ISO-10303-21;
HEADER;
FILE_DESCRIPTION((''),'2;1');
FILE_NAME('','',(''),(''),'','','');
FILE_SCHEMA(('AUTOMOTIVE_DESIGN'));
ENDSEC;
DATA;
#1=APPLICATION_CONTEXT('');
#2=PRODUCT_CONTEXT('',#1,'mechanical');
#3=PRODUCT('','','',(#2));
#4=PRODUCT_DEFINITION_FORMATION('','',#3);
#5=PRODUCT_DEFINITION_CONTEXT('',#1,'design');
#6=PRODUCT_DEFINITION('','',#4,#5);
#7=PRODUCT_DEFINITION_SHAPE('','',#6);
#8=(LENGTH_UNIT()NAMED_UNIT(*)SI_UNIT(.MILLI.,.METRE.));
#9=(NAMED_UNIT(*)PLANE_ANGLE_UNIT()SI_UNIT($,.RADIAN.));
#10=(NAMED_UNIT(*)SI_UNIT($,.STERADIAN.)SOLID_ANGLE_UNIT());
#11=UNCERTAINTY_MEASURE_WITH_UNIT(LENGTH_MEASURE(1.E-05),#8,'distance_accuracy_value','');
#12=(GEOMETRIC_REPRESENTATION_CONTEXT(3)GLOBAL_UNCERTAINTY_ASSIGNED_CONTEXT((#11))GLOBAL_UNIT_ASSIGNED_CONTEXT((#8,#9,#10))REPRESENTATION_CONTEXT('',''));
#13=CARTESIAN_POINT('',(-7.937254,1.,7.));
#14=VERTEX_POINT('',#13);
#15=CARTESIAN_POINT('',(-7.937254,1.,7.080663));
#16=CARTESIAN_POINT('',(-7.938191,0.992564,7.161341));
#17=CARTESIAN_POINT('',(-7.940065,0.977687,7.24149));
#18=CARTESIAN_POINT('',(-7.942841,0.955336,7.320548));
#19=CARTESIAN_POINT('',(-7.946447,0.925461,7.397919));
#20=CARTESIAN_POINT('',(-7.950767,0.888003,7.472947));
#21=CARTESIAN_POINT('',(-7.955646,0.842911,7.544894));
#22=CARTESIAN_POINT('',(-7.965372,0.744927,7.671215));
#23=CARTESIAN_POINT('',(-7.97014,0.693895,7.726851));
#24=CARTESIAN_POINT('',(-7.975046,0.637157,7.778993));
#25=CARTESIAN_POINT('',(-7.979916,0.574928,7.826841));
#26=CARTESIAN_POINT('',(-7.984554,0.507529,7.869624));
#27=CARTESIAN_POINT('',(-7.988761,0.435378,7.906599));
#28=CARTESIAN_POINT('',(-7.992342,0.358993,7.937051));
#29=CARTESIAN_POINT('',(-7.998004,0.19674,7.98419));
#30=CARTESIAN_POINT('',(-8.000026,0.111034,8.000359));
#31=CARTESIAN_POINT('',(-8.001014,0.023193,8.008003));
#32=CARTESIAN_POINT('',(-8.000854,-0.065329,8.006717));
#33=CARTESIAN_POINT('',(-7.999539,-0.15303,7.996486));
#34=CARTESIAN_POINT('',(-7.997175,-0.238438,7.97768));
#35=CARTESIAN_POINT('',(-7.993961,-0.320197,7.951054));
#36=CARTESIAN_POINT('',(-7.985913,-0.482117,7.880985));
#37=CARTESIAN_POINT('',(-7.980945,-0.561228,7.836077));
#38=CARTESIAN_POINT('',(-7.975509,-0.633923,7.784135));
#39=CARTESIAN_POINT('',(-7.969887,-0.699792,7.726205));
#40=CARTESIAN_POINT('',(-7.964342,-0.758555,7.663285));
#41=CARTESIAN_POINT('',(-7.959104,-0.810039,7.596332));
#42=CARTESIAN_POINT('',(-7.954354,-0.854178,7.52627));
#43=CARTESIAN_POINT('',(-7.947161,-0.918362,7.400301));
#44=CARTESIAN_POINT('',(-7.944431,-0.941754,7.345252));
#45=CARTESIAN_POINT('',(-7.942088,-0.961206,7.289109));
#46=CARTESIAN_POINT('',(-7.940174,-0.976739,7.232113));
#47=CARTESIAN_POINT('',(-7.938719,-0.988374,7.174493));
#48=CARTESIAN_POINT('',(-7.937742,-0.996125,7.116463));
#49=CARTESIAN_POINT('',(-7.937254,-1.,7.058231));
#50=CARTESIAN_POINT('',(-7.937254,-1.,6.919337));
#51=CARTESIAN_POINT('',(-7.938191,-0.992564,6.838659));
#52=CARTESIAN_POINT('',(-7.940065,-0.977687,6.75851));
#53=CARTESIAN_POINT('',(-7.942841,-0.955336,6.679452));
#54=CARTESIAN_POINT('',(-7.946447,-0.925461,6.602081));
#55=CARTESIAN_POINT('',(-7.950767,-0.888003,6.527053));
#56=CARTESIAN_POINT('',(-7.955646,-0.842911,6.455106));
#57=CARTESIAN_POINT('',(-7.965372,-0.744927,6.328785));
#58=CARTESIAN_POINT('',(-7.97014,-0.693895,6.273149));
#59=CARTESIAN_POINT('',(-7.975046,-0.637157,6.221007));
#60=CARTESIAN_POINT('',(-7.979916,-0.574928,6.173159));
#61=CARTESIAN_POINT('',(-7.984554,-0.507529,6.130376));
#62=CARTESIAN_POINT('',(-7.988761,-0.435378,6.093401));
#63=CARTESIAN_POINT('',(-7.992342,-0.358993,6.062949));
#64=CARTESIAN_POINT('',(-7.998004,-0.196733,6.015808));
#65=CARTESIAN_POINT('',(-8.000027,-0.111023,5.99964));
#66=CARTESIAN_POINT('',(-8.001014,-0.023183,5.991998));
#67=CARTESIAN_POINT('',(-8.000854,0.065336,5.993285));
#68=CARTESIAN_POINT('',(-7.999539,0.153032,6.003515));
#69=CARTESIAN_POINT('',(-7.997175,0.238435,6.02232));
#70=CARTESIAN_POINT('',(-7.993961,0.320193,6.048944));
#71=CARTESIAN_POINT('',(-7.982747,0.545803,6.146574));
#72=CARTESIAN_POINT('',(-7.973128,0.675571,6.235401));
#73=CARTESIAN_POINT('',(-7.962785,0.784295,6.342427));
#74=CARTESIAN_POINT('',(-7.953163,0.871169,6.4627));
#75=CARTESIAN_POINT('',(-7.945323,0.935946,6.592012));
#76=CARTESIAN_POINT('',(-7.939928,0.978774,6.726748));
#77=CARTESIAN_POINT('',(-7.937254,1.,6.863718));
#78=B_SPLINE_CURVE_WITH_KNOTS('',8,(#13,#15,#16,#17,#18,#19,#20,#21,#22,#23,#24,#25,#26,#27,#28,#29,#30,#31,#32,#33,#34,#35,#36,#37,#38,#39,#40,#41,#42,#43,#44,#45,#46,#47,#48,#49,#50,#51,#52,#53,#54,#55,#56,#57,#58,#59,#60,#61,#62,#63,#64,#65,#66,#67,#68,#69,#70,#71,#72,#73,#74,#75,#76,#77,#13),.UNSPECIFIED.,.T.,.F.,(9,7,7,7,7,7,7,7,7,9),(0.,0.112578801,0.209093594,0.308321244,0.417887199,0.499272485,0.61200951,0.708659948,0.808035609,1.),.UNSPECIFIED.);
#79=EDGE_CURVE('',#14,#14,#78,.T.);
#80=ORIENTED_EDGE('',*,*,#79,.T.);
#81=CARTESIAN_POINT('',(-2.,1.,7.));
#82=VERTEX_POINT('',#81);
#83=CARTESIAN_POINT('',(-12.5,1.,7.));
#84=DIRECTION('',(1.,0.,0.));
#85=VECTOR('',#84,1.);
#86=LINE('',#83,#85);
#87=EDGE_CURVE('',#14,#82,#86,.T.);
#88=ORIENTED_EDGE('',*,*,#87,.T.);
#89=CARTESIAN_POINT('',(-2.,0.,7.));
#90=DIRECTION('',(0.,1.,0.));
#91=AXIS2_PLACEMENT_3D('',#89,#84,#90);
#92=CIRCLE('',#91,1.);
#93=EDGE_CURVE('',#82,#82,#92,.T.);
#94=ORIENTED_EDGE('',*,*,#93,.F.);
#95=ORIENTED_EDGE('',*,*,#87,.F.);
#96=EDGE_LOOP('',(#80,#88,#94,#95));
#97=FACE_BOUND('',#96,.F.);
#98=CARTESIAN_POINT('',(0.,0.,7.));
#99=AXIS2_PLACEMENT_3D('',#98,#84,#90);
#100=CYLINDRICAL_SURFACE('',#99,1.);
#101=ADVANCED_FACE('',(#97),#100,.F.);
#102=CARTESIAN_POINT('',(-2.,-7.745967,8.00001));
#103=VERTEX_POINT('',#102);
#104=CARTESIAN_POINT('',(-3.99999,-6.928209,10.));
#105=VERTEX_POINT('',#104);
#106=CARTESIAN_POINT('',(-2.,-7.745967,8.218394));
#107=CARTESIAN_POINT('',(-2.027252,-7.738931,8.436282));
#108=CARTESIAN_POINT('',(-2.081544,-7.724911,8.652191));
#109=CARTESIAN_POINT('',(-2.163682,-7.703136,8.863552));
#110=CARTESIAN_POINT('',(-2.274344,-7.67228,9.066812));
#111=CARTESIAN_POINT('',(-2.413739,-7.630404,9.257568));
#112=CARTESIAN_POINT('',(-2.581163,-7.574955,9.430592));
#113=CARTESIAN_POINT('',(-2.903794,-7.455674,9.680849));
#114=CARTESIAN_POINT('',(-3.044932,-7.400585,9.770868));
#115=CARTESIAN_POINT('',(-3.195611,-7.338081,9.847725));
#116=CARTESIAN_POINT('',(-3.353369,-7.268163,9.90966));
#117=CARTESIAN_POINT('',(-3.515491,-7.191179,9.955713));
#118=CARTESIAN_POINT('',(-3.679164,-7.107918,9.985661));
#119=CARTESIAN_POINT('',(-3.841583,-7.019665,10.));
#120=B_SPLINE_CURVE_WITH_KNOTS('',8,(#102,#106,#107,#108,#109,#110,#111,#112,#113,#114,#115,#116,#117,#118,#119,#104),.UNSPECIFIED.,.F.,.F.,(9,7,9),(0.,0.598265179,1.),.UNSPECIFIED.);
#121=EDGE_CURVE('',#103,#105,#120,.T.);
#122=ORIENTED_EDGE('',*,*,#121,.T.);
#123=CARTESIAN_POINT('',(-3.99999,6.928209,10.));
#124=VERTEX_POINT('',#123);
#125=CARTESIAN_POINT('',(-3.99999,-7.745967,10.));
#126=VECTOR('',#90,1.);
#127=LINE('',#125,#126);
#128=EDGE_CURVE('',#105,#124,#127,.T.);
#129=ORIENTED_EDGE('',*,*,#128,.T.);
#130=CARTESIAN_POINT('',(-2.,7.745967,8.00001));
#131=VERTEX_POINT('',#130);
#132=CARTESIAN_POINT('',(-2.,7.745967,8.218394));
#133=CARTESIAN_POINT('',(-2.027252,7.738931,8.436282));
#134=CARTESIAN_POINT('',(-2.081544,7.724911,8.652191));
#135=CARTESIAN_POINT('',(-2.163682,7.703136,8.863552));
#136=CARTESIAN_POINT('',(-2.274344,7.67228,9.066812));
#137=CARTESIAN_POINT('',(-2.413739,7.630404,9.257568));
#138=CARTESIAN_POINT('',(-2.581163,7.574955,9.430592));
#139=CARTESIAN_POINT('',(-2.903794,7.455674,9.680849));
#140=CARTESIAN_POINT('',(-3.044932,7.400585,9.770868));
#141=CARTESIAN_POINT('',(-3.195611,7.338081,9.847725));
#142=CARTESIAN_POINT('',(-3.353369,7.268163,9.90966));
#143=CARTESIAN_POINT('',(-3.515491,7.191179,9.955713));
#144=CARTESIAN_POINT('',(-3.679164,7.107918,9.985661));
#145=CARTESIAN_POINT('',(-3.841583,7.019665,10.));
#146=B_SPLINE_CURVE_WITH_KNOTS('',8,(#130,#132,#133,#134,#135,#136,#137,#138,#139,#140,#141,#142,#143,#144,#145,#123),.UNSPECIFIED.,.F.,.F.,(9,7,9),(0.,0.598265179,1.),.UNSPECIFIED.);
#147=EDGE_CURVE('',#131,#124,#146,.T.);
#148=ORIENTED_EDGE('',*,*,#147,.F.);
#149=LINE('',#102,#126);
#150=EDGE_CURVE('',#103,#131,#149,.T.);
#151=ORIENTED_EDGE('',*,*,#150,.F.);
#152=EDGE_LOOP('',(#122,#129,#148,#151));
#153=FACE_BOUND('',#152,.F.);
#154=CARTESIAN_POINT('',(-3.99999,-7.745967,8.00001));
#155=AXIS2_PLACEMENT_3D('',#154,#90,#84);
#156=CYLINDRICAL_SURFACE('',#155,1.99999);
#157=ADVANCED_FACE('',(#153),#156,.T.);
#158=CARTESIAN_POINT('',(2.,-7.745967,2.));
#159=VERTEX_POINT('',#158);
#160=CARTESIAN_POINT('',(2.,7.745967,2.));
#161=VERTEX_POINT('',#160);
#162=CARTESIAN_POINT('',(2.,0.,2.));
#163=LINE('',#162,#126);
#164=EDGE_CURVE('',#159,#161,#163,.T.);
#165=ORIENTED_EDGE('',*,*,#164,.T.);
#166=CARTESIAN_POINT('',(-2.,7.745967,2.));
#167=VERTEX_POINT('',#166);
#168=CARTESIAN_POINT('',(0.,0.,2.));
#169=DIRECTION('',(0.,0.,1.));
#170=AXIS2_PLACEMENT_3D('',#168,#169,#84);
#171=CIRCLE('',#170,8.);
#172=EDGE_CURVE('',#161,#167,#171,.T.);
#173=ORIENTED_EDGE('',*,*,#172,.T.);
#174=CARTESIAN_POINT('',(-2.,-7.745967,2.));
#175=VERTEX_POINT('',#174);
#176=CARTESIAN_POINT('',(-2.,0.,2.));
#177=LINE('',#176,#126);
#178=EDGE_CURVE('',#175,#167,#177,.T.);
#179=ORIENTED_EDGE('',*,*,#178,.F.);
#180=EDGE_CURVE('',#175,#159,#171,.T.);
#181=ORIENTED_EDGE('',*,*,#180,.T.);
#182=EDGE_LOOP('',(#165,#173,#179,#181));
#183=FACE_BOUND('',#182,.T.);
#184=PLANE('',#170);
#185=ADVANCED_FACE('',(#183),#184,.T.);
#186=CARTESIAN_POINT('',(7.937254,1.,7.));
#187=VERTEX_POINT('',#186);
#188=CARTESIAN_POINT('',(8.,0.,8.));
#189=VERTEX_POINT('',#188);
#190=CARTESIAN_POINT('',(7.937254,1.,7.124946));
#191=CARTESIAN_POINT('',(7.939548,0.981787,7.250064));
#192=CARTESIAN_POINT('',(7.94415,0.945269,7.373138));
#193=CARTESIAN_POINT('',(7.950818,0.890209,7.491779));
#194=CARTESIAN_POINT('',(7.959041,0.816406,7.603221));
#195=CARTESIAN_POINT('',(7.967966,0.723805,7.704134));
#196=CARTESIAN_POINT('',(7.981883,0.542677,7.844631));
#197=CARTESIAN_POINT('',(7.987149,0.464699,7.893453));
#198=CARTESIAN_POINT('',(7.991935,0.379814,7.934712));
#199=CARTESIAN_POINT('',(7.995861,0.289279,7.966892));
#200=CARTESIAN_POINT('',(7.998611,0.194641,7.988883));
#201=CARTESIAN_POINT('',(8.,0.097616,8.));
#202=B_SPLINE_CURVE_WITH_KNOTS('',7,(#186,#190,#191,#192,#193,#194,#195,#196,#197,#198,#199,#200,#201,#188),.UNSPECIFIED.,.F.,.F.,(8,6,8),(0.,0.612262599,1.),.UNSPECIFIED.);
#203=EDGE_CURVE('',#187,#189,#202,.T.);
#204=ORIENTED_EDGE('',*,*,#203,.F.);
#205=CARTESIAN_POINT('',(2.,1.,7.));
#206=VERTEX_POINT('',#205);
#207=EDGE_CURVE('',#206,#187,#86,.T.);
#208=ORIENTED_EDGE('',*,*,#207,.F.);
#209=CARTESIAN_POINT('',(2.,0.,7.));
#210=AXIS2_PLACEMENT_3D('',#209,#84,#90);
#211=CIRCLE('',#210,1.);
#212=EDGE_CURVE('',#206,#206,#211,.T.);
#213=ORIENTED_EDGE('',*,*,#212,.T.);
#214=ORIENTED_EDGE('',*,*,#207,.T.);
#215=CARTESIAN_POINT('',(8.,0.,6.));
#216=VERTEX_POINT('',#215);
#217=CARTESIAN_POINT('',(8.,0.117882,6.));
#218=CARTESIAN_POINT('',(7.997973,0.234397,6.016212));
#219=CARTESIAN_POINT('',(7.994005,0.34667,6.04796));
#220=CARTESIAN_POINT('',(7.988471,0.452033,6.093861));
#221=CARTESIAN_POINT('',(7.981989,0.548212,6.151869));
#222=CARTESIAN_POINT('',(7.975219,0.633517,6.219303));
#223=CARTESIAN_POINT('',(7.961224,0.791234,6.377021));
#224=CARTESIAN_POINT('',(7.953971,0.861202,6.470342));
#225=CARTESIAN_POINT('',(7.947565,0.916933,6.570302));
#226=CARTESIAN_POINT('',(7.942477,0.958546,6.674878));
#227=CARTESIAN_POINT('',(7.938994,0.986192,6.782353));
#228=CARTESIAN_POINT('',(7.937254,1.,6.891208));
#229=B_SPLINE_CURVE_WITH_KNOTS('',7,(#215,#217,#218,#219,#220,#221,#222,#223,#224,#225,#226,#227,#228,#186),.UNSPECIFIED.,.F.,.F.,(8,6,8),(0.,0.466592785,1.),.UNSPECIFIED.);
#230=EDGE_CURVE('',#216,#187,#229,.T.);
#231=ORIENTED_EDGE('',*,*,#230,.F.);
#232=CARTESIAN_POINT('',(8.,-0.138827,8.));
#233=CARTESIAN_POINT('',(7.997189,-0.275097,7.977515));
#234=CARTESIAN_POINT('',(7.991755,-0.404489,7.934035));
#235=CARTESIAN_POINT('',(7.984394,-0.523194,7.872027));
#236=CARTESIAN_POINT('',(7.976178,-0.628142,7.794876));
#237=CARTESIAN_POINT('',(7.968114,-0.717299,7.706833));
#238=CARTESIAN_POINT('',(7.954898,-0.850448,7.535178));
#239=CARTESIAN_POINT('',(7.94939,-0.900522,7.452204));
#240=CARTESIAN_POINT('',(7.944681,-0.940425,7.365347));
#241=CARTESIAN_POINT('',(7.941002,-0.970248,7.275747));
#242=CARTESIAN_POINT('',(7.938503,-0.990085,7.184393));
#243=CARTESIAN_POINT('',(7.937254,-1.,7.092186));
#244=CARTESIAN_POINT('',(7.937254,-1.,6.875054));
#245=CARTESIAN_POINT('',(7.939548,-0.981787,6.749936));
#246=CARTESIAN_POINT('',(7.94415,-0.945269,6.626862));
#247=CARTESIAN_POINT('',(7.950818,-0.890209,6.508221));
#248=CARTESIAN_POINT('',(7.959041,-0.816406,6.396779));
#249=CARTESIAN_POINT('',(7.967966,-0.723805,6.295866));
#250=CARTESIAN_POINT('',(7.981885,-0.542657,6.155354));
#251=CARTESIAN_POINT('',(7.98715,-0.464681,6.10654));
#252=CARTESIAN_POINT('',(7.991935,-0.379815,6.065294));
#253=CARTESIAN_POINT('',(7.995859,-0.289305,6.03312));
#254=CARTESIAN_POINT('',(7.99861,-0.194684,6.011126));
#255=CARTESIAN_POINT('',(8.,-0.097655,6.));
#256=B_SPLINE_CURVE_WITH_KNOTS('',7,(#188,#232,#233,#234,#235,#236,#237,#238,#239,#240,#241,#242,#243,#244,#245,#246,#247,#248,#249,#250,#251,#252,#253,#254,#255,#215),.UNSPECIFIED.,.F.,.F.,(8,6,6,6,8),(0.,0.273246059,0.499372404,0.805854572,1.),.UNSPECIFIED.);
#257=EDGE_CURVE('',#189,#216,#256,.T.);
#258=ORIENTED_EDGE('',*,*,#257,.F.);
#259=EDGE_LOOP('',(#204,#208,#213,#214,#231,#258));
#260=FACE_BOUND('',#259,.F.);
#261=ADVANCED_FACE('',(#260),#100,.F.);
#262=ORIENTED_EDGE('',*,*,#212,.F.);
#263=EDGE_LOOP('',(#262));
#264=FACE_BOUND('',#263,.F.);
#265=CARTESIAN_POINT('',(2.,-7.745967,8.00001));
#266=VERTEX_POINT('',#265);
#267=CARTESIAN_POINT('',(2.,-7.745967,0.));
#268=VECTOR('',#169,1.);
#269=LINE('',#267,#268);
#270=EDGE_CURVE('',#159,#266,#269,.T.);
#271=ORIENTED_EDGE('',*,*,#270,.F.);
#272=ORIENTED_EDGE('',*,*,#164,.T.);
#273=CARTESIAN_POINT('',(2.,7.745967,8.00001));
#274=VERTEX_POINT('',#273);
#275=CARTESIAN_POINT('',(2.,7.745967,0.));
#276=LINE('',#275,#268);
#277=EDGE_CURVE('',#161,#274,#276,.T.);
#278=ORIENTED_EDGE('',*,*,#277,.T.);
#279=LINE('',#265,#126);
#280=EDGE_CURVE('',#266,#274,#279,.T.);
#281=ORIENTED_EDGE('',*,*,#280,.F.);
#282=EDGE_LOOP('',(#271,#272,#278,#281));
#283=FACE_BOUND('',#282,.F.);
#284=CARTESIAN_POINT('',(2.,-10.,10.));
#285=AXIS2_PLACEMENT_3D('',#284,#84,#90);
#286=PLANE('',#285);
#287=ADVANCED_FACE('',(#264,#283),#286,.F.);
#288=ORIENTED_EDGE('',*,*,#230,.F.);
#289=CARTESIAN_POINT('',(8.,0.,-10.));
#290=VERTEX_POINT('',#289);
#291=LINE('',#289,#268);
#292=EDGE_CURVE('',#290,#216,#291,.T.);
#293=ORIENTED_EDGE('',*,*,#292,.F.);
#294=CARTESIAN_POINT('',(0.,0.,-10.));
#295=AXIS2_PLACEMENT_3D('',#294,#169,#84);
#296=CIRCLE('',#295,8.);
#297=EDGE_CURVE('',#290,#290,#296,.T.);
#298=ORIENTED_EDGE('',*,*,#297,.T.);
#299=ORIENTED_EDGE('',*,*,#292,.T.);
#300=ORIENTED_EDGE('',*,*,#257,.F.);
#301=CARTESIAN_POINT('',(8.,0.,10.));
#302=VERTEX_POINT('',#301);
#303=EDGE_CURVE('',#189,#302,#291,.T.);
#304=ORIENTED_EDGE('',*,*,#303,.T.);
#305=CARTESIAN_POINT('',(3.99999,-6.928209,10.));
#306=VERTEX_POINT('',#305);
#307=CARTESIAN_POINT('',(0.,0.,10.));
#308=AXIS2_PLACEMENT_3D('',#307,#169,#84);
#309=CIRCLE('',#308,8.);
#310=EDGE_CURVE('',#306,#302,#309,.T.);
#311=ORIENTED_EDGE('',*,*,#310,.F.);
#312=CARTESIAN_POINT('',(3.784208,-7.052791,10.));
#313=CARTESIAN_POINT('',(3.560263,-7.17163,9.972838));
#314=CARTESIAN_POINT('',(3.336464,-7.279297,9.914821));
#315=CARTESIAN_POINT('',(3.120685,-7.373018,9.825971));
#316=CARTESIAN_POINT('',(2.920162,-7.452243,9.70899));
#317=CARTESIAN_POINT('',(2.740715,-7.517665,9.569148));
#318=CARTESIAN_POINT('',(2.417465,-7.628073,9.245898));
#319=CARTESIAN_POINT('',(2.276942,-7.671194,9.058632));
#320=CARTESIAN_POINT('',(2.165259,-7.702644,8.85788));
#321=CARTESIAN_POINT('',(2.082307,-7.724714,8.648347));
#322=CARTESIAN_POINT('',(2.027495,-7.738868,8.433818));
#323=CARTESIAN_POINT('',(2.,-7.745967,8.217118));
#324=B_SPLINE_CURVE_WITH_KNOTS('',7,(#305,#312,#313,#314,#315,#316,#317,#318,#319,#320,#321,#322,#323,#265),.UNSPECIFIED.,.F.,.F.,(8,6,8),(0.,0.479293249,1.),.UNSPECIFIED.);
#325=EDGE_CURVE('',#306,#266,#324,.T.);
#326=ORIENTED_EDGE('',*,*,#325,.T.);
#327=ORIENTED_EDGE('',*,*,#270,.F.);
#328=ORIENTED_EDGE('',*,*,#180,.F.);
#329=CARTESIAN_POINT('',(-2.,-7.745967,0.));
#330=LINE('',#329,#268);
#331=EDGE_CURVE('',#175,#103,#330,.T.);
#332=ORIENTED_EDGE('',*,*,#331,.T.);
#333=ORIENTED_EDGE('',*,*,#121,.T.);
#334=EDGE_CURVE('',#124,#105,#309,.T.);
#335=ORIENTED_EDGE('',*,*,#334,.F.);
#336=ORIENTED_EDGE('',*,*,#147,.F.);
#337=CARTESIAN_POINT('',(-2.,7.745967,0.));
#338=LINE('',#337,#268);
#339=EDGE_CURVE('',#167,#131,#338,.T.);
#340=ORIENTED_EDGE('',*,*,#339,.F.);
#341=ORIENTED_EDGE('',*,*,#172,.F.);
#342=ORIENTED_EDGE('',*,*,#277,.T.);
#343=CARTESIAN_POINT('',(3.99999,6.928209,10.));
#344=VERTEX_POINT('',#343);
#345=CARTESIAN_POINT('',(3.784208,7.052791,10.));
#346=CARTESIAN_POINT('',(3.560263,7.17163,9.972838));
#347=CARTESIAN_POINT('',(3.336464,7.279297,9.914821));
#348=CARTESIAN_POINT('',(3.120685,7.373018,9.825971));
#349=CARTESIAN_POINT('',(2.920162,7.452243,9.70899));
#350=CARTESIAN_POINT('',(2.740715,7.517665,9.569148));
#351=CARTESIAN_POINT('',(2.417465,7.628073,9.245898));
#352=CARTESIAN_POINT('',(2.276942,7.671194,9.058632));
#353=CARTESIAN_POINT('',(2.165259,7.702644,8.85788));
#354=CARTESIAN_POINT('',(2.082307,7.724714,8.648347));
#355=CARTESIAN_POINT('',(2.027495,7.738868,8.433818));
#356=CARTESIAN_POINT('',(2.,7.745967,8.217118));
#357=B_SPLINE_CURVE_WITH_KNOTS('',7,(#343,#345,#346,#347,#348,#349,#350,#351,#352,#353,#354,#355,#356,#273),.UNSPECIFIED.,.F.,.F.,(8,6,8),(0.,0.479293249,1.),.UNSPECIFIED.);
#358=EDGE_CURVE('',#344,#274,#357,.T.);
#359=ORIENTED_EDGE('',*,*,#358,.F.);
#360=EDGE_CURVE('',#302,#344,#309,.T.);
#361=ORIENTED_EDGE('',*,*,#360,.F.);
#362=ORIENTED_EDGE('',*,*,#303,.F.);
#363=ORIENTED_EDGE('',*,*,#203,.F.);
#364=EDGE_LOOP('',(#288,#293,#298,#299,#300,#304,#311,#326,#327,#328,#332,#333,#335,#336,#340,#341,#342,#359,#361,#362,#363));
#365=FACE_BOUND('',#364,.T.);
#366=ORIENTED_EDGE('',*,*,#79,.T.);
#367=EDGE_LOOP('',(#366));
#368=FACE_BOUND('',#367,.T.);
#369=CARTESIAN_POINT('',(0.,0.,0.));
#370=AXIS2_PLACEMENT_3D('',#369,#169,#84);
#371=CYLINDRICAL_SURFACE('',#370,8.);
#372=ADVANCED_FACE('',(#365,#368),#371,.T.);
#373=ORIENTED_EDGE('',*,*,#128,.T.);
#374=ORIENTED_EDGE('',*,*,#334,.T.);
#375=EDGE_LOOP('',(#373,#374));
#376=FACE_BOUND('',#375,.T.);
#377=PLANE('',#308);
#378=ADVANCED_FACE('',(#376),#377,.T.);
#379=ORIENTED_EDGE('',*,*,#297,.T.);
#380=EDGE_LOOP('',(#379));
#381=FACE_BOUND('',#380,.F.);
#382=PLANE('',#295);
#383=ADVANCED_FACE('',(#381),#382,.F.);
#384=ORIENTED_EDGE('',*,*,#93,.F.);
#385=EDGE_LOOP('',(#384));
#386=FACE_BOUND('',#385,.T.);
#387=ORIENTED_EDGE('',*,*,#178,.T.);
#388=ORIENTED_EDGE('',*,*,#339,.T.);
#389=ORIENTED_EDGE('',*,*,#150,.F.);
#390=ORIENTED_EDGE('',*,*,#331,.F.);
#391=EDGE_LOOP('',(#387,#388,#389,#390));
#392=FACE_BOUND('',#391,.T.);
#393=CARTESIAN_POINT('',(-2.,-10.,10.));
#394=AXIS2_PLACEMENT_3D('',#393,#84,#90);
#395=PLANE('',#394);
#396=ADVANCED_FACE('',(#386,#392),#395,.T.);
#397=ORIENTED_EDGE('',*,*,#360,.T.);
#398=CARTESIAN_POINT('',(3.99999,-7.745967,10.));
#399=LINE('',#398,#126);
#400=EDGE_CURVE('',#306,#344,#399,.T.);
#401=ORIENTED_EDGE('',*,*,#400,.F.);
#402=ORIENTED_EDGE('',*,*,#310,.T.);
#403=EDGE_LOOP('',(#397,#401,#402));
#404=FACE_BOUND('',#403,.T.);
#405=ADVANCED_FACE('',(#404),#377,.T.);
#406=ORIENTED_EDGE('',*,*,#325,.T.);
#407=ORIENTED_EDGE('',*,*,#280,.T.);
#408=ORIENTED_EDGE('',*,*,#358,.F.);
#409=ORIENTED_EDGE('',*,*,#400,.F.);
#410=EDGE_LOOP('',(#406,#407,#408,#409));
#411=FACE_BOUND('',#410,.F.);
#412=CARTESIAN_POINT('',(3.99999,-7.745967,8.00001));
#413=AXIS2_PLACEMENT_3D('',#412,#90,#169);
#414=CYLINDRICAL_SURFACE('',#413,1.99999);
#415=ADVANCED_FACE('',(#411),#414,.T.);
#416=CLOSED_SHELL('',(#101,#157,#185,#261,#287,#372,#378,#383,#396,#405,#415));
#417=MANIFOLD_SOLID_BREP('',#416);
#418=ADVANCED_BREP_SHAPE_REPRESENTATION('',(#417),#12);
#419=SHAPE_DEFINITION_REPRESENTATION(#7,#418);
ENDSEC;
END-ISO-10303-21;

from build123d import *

# Parameters (mm, degrees)
F0_R     = 8
F1_DEPTH = 10
F2_W     = 4
F2_H     = 20
F3_DEPTH = 8
F4_R     = 1
F5_DEPTH = 12.5
F6_R     = 1.99999


# Not quite as in the source:
# - a fillet or chamfer is up to 0.001 mm smaller than in the source, because OpenCascade refuses the exact size


with BuildPart() as f1:
    # F0 (on Top) → F1 (new body, symmetric)
    with BuildSketch(Plane.XY):
        Circle(F0_R)
    extrude(amount=F1_DEPTH, both=True)

    # F2 (on face) → F3 (cut)
    with BuildSketch(Plane.XY.offset(10)):
        Rectangle(F2_W, F2_H)
    extrude(amount=-F3_DEPTH, mode=Mode.SUBTRACT)

    # F4 (on Right) → F5 (cut, symmetric)
    with BuildSketch(Plane.YZ):
        with Locations((0, 7)):
            Circle(F4_R)
    extrude(amount=F5_DEPTH, both=True, mode=Mode.SUBTRACT)

    # F6 (radius 2 in the source; OpenCascade refuses exactly that, so slightly less here)
    f6_edges = [f1.edges().sort_by_distance(p)[0] for p in [
        (-2, 0, 10),
        (2, 0, 10),
    ]]
    fillet(f6_edges, radius=F6_R)


solid = f1.part
